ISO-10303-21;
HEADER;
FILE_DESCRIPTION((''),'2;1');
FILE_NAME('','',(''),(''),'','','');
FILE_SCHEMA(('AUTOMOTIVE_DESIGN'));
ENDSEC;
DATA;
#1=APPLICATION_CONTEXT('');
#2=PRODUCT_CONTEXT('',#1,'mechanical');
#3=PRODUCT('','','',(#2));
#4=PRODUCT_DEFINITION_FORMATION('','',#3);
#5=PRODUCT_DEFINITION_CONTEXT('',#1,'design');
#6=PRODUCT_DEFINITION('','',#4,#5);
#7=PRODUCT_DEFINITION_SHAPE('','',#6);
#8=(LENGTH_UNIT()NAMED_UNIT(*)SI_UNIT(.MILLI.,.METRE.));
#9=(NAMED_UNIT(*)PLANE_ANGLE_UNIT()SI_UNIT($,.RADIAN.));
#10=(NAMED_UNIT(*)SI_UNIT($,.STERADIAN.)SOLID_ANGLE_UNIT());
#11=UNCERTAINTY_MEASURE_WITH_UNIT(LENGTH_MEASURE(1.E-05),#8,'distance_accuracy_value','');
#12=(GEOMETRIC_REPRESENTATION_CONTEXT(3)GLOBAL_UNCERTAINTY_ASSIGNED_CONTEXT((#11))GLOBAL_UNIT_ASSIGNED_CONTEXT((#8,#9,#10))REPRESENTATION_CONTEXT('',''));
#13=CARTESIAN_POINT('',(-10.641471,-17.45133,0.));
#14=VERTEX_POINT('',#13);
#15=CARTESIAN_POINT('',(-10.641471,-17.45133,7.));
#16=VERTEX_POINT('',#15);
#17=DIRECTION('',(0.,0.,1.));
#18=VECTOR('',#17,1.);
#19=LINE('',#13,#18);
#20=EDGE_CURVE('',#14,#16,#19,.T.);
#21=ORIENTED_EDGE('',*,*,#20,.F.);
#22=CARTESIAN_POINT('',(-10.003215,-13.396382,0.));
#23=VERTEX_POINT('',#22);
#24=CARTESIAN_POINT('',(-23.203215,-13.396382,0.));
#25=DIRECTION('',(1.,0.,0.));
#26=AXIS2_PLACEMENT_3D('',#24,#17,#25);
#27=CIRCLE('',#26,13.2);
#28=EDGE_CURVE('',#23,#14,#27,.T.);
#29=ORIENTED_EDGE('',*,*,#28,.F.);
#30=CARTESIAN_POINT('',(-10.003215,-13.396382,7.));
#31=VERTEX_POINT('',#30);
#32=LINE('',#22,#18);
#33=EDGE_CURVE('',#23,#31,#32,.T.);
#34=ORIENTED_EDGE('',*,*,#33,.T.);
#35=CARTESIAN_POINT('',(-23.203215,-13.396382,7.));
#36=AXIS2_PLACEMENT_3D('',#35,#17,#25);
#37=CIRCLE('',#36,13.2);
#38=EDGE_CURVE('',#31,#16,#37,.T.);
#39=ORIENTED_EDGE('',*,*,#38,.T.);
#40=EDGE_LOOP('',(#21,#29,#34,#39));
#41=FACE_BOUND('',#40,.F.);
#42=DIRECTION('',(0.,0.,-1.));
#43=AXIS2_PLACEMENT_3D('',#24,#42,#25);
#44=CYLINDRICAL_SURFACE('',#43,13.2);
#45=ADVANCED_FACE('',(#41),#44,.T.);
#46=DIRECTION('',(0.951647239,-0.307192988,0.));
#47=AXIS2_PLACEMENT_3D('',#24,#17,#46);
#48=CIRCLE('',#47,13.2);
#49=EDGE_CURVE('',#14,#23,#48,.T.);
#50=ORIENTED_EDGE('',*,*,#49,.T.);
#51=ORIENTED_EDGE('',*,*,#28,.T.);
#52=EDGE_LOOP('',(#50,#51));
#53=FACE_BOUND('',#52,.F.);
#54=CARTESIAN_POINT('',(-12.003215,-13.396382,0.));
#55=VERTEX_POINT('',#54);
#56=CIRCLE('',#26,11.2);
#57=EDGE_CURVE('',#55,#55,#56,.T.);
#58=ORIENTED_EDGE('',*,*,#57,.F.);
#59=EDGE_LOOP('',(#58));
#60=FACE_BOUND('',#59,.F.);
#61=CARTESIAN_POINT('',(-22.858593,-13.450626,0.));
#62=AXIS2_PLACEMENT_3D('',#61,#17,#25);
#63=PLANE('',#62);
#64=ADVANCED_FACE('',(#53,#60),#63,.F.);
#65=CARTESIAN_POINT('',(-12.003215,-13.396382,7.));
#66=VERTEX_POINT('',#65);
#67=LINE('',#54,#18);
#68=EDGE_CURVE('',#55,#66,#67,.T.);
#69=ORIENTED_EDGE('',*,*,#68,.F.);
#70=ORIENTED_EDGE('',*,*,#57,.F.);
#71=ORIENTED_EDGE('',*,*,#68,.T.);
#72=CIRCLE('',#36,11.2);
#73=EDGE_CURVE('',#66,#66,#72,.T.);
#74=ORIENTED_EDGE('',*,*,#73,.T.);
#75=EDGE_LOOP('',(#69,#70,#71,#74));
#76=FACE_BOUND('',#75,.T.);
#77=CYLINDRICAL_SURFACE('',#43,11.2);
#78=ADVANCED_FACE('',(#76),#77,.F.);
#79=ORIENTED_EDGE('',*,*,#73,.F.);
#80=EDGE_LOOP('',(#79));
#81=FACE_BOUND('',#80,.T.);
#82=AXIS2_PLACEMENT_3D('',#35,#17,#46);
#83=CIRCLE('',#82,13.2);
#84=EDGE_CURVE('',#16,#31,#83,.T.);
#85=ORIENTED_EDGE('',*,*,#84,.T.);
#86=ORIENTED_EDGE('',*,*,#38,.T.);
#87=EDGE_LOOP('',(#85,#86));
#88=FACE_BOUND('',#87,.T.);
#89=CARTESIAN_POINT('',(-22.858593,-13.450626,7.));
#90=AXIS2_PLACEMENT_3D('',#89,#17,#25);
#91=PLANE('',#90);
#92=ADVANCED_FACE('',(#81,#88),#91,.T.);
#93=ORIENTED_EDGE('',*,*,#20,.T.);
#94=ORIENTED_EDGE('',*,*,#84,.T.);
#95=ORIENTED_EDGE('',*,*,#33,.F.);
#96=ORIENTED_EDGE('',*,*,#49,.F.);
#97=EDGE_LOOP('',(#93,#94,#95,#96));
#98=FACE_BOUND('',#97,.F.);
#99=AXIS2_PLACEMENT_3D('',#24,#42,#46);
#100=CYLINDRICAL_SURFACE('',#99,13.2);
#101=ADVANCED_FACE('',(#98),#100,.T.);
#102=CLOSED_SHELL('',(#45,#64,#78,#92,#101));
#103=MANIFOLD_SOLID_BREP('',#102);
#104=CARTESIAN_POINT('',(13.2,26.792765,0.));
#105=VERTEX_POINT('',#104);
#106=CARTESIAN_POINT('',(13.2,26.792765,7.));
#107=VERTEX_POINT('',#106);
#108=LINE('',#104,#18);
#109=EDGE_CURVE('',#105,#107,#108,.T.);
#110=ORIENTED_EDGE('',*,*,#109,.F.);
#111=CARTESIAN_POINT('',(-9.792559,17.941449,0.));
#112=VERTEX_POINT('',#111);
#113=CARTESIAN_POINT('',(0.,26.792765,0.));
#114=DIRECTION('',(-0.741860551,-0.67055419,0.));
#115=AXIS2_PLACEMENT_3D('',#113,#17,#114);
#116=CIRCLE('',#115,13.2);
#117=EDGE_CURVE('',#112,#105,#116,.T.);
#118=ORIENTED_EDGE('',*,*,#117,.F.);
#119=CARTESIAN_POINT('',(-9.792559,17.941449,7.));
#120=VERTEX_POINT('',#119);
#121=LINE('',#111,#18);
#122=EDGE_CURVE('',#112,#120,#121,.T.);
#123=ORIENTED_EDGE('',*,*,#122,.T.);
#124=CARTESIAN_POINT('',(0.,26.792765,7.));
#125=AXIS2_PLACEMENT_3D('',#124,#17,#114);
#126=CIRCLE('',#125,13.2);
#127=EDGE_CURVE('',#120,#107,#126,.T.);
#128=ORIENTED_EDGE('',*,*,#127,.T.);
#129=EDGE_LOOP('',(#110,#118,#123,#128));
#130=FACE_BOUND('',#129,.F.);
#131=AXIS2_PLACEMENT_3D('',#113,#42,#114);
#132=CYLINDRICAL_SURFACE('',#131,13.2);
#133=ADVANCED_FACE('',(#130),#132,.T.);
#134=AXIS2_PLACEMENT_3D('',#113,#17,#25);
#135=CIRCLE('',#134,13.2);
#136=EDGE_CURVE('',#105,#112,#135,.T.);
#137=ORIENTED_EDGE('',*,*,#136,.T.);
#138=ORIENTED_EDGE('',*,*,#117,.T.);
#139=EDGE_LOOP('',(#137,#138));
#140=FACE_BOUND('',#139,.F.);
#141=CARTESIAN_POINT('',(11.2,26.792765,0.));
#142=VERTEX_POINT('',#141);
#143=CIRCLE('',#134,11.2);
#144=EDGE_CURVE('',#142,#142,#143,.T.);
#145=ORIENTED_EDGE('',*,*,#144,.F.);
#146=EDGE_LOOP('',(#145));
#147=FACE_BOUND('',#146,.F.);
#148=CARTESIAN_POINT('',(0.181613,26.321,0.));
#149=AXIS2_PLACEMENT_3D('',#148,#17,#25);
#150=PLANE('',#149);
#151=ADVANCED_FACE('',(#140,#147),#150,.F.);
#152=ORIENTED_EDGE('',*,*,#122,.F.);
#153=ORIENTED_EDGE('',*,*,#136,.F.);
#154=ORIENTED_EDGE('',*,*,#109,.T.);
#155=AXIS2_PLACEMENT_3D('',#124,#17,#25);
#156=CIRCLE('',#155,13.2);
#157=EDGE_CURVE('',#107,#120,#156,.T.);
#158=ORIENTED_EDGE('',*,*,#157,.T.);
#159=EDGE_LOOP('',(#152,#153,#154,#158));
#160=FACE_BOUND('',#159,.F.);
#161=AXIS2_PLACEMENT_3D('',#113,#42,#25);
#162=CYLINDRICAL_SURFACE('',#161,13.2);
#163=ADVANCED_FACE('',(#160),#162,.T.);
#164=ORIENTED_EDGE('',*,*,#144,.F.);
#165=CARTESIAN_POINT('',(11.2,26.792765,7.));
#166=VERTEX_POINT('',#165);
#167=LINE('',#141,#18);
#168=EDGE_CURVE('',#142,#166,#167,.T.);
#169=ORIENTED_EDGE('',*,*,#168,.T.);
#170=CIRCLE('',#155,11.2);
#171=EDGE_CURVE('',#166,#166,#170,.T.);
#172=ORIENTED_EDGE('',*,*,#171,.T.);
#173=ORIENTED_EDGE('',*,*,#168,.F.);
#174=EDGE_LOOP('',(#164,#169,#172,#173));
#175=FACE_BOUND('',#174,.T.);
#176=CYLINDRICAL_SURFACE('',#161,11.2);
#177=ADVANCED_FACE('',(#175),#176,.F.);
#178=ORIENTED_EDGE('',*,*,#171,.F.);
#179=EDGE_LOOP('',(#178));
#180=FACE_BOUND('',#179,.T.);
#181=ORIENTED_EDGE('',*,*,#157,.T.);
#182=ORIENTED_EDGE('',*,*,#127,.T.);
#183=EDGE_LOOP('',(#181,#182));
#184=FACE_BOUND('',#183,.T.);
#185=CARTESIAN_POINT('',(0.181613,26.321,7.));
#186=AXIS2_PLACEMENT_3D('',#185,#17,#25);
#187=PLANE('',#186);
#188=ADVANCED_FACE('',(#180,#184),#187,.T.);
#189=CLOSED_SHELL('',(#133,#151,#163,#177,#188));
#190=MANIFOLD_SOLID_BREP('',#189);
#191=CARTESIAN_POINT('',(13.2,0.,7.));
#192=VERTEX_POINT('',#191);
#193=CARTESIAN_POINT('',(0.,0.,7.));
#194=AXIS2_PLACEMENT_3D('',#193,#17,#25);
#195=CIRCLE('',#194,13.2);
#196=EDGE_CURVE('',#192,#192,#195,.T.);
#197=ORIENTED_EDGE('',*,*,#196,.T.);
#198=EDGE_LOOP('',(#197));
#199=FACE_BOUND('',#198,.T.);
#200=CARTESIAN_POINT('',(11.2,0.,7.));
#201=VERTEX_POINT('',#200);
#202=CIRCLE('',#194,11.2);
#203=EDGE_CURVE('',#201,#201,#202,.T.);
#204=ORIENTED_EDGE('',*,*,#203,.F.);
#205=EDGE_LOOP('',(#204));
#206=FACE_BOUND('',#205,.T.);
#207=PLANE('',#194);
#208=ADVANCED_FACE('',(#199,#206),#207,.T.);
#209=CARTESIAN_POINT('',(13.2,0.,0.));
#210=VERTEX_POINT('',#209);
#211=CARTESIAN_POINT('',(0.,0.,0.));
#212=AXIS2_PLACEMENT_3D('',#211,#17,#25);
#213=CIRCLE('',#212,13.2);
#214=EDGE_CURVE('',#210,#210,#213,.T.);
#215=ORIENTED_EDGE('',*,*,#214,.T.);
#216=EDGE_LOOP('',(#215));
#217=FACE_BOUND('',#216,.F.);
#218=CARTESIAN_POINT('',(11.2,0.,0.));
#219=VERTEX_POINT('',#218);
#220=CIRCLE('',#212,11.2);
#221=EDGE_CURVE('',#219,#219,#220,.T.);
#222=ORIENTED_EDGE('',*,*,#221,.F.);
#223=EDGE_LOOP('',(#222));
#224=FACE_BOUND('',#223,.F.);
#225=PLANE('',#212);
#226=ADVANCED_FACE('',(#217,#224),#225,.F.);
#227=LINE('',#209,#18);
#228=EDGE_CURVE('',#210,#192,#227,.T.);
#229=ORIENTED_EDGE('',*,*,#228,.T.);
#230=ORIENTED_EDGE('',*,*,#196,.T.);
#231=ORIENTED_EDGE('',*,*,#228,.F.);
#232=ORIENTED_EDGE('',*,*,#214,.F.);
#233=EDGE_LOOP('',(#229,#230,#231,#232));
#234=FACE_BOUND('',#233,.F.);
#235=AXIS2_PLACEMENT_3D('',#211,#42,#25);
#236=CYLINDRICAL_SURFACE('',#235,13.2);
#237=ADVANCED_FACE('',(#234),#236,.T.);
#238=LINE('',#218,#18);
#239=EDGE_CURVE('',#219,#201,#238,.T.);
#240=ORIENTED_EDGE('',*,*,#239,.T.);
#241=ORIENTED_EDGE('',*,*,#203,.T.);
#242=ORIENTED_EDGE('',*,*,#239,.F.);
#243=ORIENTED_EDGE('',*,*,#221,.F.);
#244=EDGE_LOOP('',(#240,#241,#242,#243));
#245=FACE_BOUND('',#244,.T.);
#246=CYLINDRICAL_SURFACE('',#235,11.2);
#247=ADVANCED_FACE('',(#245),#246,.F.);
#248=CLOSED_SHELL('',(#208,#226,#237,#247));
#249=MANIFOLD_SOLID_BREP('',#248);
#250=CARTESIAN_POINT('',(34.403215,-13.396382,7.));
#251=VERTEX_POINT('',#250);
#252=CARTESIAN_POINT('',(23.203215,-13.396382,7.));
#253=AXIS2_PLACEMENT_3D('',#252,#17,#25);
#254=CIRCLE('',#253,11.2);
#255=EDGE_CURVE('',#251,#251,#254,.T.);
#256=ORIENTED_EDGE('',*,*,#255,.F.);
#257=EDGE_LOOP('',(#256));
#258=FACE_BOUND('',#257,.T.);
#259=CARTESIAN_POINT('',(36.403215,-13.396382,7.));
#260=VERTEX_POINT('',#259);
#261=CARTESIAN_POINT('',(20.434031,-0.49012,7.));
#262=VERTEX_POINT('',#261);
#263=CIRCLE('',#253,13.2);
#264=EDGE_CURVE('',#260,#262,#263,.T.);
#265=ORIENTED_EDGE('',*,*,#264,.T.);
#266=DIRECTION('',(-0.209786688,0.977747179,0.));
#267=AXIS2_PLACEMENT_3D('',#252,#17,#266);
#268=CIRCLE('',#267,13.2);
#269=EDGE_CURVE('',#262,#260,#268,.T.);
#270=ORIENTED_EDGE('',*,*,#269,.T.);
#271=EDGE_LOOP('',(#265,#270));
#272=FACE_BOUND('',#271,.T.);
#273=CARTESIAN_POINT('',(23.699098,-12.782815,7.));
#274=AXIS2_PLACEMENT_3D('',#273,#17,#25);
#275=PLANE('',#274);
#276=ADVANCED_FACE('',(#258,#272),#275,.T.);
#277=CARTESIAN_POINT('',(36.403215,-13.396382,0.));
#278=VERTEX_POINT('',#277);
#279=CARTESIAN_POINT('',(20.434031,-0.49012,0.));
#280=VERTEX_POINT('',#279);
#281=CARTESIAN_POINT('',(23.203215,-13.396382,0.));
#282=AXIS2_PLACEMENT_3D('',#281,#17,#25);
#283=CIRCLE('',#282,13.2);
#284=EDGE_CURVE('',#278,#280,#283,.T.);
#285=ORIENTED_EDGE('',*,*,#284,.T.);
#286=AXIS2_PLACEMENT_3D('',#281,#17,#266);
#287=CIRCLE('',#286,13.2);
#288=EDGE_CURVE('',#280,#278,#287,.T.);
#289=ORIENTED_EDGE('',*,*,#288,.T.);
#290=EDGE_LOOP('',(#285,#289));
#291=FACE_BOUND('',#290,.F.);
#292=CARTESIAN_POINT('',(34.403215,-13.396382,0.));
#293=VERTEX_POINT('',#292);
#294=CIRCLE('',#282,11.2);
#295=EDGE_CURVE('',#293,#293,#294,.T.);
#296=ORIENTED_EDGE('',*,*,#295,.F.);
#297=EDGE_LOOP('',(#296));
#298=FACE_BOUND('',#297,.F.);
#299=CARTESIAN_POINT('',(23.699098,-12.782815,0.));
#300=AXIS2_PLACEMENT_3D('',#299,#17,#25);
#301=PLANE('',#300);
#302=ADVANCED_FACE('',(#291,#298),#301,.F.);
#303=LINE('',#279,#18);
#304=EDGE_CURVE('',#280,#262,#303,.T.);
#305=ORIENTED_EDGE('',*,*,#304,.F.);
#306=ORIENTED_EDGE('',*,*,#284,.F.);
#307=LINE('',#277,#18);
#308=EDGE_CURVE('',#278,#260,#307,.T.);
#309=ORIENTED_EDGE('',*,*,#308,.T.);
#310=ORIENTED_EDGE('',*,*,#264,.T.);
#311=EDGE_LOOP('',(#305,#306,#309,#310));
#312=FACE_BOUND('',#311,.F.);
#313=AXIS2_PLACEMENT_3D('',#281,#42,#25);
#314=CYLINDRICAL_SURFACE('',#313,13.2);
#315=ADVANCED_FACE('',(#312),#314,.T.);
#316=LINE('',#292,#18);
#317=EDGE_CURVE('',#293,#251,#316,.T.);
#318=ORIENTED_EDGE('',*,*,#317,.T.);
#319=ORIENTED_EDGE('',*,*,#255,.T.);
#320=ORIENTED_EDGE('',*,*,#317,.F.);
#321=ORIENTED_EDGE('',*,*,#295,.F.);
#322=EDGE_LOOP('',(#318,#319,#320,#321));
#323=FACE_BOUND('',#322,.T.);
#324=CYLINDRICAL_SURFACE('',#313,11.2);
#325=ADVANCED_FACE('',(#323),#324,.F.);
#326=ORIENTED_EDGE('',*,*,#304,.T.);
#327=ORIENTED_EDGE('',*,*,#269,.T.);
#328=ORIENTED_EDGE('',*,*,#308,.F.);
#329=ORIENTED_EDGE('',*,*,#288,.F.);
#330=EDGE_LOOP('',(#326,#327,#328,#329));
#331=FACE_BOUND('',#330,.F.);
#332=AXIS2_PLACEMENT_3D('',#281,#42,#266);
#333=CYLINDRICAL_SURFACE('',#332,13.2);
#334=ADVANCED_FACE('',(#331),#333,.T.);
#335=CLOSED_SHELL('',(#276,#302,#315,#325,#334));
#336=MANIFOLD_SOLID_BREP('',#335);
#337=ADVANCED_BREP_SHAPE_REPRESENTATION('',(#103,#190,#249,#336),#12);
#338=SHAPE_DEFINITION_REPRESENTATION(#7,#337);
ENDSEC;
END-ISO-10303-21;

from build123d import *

# Parameters (mm, degrees)
F0_R     = 13.2
F0_R_2   = 11.2
F1_DEPTH = 7


# Not quite as in the source:
# - the program builds the solid bodies; features that only make, move or delete a surface that nothing else refers to are left out


with BuildPart() as f1:
    # F0 (on Top) → F1 (new body)
    with BuildSketch(Plane.XY):
        Circle(F0_R)
        Circle(F0_R_2, mode=Mode.SUBTRACT)
    extrude(amount=F1_DEPTH)


with BuildPart() as f1b:
    # F0 (on Top) → F1, piece 2 (new body)
    with BuildSketch(Plane.XY):
        with BuildLine():
            ThreePointArc((-9.7925592787, 17.9414493505), (4.7422683139, 14.4740434947), (13.2, 26.7927646637))
            ThreePointArc((13.2, 26.7927646637), (-4.7422683139, 39.1114858327), (-9.7925592787, 17.9414493505))
        make_face()
        with Locations((0, 26.7927646637)):
            Circle(F0_R_2, mode=Mode.SUBTRACT)
    extrude(amount=F1_DEPTH)


with BuildPart() as f1c:
    # F0 (on Top) → F1, piece 3 (new body)
    with BuildSketch(Plane.XY):
        with BuildLine():
            ThreePointArc((-10.6414712789, -17.4513297787), (-10.163755205, -15.448818085), (-10.0032148364, -13.3963823318))
            ThreePointArc((-10.0032148364, -13.3963823318), (-36.2426744678, -11.3439465787), (-10.6414712789, -17.4513297787))
        make_face()
        with Locations((-23.2032148364, -13.3963823318)):
            Circle(F0_R_2, mode=Mode.SUBTRACT)
    extrude(amount=F1_DEPTH)


with BuildPart() as f1d:
    # F0 (on Top) → F1, piece 4 (new body)
    with BuildSketch(Plane.XY):
        with BuildLine():
            ThreePointArc((20.4340305576, -0.4901195718), (14.9060235188, -23.6626677477), (36.4032148364, -13.3963823318))
            ThreePointArc((36.4032148364, -13.3963823318), (31.5004061539, -3.130096916), (20.4340305576, -0.4901195718))
        make_face()
        with Locations((23.2032148364, -13.3963823318)):
            Circle(F0_R_2, mode=Mode.SUBTRACT)
    extrude(amount=F1_DEPTH)


solid = Compound([f1.part, f1b.part, f1c.part, f1d.part])
